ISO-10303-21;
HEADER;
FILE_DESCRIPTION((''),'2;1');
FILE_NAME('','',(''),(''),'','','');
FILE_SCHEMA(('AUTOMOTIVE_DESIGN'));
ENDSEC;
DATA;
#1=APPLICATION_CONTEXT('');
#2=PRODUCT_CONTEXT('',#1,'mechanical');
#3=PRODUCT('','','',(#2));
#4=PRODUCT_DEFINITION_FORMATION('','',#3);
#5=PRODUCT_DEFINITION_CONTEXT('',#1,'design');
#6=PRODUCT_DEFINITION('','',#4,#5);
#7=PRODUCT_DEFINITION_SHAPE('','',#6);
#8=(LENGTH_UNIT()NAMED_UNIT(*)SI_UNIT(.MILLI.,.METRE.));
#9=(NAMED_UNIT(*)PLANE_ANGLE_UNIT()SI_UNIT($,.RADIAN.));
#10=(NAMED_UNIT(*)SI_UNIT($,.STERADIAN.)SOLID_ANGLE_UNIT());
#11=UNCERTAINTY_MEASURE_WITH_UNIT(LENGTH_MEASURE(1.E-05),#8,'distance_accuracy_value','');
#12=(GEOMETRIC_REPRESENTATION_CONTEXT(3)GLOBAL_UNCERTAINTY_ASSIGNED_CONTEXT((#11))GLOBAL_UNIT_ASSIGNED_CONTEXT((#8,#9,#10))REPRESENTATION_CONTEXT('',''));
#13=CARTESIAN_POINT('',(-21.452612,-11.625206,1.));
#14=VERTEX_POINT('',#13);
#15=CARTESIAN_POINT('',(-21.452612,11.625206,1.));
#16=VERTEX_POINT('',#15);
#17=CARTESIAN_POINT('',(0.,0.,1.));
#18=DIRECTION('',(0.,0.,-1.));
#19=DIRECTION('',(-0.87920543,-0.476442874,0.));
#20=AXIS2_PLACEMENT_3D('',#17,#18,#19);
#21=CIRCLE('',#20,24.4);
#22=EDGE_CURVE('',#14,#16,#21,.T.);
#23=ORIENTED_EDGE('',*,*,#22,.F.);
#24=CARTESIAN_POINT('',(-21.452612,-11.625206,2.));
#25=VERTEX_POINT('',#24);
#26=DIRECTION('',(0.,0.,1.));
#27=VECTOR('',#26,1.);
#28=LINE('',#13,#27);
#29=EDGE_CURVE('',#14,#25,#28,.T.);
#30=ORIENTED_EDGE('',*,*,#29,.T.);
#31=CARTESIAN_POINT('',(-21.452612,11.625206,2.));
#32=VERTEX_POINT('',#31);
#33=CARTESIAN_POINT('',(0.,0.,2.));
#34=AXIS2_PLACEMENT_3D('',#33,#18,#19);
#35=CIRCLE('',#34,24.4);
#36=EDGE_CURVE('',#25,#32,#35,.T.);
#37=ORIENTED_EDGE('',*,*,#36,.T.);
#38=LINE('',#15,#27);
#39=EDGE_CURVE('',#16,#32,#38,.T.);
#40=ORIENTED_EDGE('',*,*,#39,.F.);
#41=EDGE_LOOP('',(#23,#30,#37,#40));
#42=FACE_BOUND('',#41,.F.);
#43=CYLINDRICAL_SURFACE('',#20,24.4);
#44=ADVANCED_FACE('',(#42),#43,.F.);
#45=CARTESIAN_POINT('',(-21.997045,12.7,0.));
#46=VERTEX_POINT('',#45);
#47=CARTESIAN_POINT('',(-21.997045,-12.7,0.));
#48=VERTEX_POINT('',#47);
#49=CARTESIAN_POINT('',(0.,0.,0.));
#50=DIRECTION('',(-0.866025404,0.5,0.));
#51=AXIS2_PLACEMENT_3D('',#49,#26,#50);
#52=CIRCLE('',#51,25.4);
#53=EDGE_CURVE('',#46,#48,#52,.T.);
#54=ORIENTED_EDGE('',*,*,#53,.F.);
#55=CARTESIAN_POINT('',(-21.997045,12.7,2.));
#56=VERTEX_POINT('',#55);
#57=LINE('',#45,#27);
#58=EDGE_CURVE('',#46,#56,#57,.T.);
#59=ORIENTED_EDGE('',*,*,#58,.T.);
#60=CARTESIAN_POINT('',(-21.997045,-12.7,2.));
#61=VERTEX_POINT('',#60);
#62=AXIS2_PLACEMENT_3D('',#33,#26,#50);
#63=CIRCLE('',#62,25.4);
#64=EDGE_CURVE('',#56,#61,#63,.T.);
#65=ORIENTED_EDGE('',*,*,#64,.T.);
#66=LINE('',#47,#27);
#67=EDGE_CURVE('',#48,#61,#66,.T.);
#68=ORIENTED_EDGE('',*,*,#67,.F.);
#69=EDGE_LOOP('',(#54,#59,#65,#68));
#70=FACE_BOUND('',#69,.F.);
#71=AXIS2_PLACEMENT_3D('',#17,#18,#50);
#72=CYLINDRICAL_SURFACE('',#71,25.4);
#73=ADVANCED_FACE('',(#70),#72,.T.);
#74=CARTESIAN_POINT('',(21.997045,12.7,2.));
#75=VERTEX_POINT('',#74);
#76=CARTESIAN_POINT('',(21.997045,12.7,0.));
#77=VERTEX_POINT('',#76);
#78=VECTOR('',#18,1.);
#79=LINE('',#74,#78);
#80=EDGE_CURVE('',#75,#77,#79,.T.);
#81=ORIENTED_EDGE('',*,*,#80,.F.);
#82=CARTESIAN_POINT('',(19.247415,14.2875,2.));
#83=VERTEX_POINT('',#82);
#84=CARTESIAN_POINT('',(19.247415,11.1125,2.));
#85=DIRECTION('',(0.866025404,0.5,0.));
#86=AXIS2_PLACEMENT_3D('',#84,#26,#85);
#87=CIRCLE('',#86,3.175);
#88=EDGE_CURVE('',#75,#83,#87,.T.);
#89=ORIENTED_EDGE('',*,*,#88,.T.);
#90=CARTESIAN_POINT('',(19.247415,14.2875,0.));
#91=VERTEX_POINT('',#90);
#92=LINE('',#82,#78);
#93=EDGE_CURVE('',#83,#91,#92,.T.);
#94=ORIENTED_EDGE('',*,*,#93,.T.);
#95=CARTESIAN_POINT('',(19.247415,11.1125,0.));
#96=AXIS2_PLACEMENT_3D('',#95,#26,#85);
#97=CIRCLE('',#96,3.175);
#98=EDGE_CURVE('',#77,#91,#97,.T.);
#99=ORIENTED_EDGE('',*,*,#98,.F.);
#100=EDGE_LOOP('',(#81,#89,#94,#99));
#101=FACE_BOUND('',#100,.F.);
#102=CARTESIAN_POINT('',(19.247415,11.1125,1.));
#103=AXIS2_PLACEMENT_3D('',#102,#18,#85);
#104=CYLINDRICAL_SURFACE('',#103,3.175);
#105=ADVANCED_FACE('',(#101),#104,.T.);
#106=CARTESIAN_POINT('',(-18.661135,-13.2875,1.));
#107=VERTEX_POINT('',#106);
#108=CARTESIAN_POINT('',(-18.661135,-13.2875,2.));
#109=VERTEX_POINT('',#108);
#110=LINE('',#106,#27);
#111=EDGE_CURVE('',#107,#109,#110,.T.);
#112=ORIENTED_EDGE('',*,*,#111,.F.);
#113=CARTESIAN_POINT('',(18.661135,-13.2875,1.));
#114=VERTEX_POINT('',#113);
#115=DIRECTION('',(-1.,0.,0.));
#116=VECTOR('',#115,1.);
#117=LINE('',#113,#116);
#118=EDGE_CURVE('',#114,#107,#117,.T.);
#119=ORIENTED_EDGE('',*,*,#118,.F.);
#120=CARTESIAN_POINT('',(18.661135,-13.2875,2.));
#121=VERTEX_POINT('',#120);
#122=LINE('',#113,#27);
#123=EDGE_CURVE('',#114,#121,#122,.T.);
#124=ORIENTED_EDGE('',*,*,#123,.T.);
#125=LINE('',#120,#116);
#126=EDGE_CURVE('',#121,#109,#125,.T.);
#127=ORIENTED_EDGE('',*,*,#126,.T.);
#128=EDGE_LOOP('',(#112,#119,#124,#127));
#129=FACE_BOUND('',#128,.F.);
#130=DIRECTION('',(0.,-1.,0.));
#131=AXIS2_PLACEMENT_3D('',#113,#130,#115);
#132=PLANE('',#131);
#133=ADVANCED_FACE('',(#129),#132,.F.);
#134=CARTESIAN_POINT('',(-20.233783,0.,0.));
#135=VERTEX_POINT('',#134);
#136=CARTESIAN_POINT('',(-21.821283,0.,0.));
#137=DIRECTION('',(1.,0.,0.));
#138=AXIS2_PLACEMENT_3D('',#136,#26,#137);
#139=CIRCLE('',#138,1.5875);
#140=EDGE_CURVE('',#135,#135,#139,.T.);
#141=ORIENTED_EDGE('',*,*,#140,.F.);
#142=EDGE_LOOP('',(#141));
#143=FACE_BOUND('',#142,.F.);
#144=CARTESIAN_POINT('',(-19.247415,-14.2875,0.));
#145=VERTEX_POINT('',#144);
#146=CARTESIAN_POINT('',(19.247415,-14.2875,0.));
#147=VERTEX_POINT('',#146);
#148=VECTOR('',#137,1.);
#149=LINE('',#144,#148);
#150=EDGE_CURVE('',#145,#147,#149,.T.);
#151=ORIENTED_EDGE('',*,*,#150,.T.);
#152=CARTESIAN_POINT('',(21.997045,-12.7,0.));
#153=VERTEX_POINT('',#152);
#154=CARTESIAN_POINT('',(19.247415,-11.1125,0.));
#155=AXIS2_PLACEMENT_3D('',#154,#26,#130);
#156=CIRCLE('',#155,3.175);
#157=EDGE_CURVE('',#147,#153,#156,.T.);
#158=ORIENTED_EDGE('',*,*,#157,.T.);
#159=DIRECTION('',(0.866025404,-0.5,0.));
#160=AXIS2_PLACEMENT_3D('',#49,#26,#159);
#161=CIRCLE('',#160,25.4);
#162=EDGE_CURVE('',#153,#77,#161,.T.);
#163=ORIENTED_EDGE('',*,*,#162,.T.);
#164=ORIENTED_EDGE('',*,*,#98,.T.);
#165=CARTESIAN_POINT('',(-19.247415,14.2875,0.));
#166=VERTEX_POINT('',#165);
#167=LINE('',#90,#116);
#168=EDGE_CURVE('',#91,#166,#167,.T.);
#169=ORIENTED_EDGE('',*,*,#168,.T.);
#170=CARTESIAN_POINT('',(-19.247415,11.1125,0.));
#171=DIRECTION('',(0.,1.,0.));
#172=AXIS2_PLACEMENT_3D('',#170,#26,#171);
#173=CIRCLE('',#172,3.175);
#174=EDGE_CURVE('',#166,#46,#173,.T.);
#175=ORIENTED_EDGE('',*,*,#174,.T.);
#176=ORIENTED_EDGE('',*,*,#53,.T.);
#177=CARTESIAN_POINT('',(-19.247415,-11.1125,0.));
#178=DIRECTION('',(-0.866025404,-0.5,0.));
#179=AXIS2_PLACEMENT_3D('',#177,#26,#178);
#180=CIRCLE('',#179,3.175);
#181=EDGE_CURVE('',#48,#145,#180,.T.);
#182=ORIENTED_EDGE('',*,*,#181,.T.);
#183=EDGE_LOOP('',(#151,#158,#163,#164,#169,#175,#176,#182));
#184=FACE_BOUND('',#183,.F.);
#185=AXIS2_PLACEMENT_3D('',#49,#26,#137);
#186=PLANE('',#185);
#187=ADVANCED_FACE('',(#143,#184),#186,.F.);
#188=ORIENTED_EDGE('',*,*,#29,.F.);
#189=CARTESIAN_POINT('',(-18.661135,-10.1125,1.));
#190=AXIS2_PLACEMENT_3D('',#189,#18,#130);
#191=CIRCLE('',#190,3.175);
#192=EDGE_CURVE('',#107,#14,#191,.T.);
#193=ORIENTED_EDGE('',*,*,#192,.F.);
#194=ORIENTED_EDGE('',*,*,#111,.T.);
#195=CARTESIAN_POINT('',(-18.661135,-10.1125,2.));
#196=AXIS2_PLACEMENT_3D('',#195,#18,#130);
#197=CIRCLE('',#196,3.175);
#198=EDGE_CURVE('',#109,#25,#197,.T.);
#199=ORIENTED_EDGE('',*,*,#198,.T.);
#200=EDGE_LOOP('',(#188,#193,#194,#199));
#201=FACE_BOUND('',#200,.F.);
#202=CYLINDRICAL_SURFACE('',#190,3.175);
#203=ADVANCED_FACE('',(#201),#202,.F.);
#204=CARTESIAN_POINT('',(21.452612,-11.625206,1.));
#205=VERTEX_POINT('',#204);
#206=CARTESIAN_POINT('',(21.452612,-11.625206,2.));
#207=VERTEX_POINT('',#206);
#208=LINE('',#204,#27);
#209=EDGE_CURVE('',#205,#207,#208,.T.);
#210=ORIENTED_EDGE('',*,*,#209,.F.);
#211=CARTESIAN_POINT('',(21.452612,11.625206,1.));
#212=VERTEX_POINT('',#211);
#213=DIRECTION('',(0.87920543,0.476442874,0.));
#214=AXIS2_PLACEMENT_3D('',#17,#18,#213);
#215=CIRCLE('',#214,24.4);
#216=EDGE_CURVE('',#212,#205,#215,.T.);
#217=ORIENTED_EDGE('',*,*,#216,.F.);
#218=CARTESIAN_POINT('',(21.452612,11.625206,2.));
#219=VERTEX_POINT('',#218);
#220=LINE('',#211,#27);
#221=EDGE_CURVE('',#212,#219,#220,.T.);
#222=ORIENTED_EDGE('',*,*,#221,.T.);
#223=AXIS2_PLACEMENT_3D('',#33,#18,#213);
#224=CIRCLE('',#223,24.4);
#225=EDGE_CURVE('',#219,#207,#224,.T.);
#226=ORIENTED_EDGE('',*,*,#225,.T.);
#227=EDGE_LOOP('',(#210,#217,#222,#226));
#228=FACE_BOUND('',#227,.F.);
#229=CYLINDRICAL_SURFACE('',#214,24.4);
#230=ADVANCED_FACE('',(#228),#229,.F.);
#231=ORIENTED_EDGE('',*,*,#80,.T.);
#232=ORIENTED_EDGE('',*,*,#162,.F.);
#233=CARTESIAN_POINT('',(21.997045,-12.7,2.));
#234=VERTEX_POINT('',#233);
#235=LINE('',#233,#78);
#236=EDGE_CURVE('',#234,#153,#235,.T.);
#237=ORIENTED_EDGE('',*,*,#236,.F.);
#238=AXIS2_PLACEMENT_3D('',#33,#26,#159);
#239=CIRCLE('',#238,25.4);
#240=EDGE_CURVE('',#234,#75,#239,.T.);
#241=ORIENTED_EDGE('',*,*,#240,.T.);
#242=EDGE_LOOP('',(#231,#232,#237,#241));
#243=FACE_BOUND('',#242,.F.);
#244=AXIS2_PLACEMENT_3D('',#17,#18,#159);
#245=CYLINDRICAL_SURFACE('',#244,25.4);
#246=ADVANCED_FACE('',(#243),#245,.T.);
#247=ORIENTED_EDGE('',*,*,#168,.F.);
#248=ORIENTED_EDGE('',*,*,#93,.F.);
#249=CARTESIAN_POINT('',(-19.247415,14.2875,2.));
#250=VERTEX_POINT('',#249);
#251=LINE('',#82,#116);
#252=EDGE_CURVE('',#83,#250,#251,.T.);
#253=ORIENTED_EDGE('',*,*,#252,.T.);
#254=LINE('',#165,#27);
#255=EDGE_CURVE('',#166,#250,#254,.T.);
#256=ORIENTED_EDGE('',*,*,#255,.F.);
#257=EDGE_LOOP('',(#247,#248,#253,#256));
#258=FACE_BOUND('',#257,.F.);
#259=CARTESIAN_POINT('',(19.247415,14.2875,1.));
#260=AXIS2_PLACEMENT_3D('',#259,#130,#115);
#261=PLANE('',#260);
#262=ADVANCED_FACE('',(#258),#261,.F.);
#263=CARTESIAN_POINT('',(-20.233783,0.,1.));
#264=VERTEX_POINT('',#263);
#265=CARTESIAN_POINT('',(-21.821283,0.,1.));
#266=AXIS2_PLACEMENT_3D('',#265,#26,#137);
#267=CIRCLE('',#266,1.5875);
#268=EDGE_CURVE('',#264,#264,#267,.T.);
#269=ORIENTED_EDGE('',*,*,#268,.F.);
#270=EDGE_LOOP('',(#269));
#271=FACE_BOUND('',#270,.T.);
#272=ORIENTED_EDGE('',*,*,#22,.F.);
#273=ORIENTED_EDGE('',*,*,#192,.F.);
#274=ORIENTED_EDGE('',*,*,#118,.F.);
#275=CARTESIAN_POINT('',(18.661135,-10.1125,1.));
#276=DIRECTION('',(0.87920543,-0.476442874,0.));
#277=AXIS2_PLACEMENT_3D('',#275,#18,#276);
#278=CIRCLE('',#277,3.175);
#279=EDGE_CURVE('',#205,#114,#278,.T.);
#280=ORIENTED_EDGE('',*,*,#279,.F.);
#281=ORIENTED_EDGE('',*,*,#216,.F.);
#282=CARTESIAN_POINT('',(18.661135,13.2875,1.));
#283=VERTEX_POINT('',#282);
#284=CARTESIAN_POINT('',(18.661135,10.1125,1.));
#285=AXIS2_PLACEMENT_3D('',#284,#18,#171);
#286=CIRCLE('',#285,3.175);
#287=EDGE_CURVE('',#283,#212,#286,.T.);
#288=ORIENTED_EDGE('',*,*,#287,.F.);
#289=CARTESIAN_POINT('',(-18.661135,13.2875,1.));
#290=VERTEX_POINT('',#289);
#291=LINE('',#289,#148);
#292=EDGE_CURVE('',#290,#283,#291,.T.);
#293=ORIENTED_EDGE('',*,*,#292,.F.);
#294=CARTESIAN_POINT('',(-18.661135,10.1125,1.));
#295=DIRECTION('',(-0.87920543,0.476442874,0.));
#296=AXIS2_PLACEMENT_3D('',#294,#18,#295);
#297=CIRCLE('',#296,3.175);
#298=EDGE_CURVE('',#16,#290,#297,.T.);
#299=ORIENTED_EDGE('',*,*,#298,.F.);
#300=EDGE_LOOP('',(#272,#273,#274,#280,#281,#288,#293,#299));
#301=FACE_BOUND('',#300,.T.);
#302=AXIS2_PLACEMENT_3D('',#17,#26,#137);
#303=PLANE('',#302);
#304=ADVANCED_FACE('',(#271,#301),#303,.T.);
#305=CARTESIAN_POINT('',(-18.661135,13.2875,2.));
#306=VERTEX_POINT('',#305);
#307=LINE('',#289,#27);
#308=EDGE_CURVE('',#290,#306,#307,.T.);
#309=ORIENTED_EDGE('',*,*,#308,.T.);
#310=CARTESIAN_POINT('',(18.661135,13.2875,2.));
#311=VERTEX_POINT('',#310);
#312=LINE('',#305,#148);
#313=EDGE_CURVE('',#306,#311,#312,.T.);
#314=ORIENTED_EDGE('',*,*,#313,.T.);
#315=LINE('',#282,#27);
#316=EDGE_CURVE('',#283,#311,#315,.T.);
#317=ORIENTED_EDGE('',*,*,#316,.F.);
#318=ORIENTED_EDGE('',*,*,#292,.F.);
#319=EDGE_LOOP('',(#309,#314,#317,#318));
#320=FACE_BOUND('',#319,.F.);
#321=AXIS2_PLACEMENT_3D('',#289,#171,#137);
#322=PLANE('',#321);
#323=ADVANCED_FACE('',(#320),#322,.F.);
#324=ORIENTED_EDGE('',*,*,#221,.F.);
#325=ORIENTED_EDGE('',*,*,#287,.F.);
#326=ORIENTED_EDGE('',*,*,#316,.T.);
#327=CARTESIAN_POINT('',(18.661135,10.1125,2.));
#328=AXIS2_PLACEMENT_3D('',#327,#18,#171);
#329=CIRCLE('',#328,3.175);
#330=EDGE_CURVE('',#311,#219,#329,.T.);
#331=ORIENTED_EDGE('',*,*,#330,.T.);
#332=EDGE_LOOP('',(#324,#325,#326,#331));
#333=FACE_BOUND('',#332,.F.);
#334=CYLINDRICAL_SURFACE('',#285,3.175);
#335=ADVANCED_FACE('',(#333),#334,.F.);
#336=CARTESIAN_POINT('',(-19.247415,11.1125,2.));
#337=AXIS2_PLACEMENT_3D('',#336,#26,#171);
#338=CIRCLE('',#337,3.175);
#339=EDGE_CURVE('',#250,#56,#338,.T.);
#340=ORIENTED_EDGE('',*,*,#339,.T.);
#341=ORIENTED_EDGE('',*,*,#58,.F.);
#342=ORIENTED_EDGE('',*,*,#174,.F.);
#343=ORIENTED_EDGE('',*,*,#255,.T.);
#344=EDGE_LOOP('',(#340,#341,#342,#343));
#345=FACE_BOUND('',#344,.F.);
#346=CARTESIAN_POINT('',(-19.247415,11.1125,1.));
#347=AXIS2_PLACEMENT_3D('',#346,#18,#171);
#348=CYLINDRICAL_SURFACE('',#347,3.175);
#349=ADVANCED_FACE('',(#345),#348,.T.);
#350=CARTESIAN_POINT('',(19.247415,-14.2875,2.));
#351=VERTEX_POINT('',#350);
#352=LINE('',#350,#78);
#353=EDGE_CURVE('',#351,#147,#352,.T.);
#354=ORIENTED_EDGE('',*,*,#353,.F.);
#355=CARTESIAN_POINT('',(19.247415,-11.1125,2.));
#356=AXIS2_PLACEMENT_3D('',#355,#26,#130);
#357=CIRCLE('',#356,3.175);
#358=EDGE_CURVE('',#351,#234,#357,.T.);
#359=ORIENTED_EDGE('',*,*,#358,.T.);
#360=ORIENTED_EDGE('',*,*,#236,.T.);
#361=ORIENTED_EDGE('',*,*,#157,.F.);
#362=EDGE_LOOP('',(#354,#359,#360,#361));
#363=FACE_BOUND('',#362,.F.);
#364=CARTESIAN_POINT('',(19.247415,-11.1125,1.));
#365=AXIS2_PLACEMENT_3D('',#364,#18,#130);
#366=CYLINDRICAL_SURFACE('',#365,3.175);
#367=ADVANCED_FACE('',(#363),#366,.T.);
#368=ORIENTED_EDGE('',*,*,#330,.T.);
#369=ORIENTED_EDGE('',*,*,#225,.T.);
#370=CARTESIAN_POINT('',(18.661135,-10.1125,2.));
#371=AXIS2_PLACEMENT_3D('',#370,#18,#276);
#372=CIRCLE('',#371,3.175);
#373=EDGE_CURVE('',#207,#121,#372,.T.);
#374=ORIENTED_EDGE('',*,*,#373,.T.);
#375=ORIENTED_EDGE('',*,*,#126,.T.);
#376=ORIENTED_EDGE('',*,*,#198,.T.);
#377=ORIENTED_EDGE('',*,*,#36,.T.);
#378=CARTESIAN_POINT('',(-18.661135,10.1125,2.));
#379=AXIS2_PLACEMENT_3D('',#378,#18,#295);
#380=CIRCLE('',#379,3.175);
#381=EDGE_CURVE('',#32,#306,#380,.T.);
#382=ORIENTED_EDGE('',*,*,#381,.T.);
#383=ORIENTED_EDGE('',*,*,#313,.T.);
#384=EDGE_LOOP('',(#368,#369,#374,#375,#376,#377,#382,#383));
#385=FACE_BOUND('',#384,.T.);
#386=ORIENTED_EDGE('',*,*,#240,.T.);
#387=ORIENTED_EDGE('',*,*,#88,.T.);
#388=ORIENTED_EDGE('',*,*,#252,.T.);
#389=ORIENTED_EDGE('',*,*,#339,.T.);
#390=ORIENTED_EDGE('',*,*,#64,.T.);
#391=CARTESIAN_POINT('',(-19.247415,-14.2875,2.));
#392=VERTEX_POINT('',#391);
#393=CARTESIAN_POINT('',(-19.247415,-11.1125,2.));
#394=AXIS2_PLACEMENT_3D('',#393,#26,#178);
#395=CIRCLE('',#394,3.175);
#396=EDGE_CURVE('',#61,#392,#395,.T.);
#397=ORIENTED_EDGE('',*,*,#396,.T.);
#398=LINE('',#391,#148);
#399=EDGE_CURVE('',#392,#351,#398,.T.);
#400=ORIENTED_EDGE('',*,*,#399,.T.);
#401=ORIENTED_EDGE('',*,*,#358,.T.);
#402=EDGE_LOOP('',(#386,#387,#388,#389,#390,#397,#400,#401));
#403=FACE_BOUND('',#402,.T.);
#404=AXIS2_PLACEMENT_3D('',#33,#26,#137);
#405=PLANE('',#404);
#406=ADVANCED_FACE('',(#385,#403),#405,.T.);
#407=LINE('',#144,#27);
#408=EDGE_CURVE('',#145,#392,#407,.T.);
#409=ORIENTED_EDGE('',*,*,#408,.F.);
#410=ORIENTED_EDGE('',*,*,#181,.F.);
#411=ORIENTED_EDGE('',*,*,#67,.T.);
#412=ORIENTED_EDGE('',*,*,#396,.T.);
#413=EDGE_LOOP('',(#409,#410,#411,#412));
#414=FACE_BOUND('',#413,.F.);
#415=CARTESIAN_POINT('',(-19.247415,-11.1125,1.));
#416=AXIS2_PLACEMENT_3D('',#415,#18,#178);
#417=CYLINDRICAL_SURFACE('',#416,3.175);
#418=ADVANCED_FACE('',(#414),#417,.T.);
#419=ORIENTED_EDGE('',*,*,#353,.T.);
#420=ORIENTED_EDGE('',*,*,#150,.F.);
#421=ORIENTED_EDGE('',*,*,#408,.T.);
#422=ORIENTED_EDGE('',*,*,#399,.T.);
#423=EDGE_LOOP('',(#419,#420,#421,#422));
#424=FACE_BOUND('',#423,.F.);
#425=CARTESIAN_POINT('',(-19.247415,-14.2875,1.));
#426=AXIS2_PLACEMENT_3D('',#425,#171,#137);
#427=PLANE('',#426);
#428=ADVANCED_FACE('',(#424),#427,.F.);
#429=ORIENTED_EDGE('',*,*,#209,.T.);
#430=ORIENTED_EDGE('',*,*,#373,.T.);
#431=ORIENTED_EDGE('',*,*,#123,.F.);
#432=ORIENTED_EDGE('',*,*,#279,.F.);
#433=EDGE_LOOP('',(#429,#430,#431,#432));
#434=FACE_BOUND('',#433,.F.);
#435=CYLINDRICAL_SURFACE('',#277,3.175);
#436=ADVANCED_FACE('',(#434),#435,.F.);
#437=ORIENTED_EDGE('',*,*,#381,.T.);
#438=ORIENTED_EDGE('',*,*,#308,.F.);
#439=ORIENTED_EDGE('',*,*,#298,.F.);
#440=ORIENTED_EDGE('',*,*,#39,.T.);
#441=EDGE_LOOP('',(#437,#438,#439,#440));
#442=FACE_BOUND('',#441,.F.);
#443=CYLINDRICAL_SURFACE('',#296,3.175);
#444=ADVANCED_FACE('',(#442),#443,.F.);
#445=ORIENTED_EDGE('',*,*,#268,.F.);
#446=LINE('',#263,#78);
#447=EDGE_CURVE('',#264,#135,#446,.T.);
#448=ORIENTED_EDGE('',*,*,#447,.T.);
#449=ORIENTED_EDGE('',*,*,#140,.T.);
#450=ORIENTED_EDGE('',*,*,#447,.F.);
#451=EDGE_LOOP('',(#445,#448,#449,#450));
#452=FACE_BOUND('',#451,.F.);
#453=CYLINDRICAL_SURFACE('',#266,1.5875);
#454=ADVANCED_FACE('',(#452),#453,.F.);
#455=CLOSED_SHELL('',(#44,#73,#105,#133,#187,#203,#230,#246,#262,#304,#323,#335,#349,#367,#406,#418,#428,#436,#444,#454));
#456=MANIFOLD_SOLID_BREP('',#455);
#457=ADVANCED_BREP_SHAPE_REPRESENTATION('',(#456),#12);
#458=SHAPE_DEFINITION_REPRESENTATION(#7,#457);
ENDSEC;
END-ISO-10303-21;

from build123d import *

# Parameters (mm, degrees)
F1_DEPTH = 1
F3_DEPTH = 1
F4_R     = 1.5875
F5_DEPTH = 1


# Not quite as in the source:
# - the program builds the solid bodies; features that only make, move or delete a surface that nothing else refers to are left out


with BuildPart() as f1:
    # F0 (on Top) → F1 (new body)
    with BuildSketch(Plane.XY):
        with BuildLine():
            ThreePointArc((-19.2474145991, 14.2875), (-20.8349145991, 13.862130657), (-21.9970452561, 12.7))
            ThreePointArc((-21.9970452561, 12.7), (-25.4, 0), (-21.9970452561, -12.7))
            ThreePointArc((-21.9970452561, -12.7), (-20.8349145991, -13.862130657), (-19.2474145991, -14.2875))
            Line((-19.2474145991, -14.2875), (19.2474145991, -14.2875))
            ThreePointArc((19.2474145991, -14.2875), (20.8349145991, -13.862130657), (21.9970452561, -12.7))
            ThreePointArc((21.9970452561, -12.7), (25.4, 0), (21.9970452561, 12.7))
            ThreePointArc((21.9970452561, 12.7), (20.8349145991, 13.862130657), (19.2474145991, 14.2875))
            Line((19.2474145991, 14.2875), (-19.2474145991, 14.2875))
        make_face()
    extrude(amount=F1_DEPTH)

    # F2 (on face) → F3 (join)
    with BuildSketch(Plane.XY.offset(1)):
        with BuildLine():
            Line((19.2474145991, 14.2875), (-19.2474145991, 14.2875))
            ThreePointArc((-19.2474145991, 14.2875), (-20.8349145991, 13.862130657), (-21.9970452561, 12.7))
            ThreePointArc((-21.9970452561, 12.7), (-25.4, 0), (-21.9970452561, -12.7))
            ThreePointArc((-21.9970452561, -12.7), (-20.8349145991, -13.862130657), (-19.2474145991, -14.2875))
            Line((-19.2474145991, -14.2875), (19.2474145991, -14.2875))
            ThreePointArc((19.2474145991, -14.2875), (20.8349145991, -13.862130657), (21.9970452561, -12.7))
            ThreePointArc((21.9970452561, -12.7), (25.4, 0), (21.9970452561, 12.7))
            ThreePointArc((21.9970452561, 12.7), (20.8349145991, 13.862130657), (19.2474145991, 14.2875))
        make_face()
        with BuildLine():
            ThreePointArc((-21.4526124879, 11.6252061249), (-20.2856017842, 12.8404540819), (-18.6611352482, 13.2875))
            Line((-18.6611352482, 13.2875), (18.6611352482, 13.2875))
            ThreePointArc((18.6611352482, 13.2875), (20.2856017842, 12.8404540819), (21.4526124879, 11.6252061249))
            ThreePointArc((21.4526124879, 11.6252061249), (24.4, 0), (21.4526124879, -11.6252061249))
            ThreePointArc((21.4526124879, -11.6252061249), (20.2856017842, -12.8404540819), (18.6611352482, -13.2875))
            Line((18.6611352482, -13.2875), (-18.6611352482, -13.2875))
            ThreePointArc((-18.6611352482, -13.2875), (-20.2856017842, -12.8404540819), (-21.4526124879, -11.6252061249))
            ThreePointArc((-21.4526124879, -11.6252061249), (-24.4, 0), (-21.4526124879, 11.6252061249))
        make_face(mode=Mode.SUBTRACT)
    extrude(amount=F3_DEPTH)

    # F4 (on face) → F5 (cut)
    with BuildSketch(Plane.XY.offset(1)):
        with Locations((-21.821282804, 0)):
            Circle(F4_R)
    extrude(amount=-F5_DEPTH, mode=Mode.SUBTRACT)


solid = f1.part
